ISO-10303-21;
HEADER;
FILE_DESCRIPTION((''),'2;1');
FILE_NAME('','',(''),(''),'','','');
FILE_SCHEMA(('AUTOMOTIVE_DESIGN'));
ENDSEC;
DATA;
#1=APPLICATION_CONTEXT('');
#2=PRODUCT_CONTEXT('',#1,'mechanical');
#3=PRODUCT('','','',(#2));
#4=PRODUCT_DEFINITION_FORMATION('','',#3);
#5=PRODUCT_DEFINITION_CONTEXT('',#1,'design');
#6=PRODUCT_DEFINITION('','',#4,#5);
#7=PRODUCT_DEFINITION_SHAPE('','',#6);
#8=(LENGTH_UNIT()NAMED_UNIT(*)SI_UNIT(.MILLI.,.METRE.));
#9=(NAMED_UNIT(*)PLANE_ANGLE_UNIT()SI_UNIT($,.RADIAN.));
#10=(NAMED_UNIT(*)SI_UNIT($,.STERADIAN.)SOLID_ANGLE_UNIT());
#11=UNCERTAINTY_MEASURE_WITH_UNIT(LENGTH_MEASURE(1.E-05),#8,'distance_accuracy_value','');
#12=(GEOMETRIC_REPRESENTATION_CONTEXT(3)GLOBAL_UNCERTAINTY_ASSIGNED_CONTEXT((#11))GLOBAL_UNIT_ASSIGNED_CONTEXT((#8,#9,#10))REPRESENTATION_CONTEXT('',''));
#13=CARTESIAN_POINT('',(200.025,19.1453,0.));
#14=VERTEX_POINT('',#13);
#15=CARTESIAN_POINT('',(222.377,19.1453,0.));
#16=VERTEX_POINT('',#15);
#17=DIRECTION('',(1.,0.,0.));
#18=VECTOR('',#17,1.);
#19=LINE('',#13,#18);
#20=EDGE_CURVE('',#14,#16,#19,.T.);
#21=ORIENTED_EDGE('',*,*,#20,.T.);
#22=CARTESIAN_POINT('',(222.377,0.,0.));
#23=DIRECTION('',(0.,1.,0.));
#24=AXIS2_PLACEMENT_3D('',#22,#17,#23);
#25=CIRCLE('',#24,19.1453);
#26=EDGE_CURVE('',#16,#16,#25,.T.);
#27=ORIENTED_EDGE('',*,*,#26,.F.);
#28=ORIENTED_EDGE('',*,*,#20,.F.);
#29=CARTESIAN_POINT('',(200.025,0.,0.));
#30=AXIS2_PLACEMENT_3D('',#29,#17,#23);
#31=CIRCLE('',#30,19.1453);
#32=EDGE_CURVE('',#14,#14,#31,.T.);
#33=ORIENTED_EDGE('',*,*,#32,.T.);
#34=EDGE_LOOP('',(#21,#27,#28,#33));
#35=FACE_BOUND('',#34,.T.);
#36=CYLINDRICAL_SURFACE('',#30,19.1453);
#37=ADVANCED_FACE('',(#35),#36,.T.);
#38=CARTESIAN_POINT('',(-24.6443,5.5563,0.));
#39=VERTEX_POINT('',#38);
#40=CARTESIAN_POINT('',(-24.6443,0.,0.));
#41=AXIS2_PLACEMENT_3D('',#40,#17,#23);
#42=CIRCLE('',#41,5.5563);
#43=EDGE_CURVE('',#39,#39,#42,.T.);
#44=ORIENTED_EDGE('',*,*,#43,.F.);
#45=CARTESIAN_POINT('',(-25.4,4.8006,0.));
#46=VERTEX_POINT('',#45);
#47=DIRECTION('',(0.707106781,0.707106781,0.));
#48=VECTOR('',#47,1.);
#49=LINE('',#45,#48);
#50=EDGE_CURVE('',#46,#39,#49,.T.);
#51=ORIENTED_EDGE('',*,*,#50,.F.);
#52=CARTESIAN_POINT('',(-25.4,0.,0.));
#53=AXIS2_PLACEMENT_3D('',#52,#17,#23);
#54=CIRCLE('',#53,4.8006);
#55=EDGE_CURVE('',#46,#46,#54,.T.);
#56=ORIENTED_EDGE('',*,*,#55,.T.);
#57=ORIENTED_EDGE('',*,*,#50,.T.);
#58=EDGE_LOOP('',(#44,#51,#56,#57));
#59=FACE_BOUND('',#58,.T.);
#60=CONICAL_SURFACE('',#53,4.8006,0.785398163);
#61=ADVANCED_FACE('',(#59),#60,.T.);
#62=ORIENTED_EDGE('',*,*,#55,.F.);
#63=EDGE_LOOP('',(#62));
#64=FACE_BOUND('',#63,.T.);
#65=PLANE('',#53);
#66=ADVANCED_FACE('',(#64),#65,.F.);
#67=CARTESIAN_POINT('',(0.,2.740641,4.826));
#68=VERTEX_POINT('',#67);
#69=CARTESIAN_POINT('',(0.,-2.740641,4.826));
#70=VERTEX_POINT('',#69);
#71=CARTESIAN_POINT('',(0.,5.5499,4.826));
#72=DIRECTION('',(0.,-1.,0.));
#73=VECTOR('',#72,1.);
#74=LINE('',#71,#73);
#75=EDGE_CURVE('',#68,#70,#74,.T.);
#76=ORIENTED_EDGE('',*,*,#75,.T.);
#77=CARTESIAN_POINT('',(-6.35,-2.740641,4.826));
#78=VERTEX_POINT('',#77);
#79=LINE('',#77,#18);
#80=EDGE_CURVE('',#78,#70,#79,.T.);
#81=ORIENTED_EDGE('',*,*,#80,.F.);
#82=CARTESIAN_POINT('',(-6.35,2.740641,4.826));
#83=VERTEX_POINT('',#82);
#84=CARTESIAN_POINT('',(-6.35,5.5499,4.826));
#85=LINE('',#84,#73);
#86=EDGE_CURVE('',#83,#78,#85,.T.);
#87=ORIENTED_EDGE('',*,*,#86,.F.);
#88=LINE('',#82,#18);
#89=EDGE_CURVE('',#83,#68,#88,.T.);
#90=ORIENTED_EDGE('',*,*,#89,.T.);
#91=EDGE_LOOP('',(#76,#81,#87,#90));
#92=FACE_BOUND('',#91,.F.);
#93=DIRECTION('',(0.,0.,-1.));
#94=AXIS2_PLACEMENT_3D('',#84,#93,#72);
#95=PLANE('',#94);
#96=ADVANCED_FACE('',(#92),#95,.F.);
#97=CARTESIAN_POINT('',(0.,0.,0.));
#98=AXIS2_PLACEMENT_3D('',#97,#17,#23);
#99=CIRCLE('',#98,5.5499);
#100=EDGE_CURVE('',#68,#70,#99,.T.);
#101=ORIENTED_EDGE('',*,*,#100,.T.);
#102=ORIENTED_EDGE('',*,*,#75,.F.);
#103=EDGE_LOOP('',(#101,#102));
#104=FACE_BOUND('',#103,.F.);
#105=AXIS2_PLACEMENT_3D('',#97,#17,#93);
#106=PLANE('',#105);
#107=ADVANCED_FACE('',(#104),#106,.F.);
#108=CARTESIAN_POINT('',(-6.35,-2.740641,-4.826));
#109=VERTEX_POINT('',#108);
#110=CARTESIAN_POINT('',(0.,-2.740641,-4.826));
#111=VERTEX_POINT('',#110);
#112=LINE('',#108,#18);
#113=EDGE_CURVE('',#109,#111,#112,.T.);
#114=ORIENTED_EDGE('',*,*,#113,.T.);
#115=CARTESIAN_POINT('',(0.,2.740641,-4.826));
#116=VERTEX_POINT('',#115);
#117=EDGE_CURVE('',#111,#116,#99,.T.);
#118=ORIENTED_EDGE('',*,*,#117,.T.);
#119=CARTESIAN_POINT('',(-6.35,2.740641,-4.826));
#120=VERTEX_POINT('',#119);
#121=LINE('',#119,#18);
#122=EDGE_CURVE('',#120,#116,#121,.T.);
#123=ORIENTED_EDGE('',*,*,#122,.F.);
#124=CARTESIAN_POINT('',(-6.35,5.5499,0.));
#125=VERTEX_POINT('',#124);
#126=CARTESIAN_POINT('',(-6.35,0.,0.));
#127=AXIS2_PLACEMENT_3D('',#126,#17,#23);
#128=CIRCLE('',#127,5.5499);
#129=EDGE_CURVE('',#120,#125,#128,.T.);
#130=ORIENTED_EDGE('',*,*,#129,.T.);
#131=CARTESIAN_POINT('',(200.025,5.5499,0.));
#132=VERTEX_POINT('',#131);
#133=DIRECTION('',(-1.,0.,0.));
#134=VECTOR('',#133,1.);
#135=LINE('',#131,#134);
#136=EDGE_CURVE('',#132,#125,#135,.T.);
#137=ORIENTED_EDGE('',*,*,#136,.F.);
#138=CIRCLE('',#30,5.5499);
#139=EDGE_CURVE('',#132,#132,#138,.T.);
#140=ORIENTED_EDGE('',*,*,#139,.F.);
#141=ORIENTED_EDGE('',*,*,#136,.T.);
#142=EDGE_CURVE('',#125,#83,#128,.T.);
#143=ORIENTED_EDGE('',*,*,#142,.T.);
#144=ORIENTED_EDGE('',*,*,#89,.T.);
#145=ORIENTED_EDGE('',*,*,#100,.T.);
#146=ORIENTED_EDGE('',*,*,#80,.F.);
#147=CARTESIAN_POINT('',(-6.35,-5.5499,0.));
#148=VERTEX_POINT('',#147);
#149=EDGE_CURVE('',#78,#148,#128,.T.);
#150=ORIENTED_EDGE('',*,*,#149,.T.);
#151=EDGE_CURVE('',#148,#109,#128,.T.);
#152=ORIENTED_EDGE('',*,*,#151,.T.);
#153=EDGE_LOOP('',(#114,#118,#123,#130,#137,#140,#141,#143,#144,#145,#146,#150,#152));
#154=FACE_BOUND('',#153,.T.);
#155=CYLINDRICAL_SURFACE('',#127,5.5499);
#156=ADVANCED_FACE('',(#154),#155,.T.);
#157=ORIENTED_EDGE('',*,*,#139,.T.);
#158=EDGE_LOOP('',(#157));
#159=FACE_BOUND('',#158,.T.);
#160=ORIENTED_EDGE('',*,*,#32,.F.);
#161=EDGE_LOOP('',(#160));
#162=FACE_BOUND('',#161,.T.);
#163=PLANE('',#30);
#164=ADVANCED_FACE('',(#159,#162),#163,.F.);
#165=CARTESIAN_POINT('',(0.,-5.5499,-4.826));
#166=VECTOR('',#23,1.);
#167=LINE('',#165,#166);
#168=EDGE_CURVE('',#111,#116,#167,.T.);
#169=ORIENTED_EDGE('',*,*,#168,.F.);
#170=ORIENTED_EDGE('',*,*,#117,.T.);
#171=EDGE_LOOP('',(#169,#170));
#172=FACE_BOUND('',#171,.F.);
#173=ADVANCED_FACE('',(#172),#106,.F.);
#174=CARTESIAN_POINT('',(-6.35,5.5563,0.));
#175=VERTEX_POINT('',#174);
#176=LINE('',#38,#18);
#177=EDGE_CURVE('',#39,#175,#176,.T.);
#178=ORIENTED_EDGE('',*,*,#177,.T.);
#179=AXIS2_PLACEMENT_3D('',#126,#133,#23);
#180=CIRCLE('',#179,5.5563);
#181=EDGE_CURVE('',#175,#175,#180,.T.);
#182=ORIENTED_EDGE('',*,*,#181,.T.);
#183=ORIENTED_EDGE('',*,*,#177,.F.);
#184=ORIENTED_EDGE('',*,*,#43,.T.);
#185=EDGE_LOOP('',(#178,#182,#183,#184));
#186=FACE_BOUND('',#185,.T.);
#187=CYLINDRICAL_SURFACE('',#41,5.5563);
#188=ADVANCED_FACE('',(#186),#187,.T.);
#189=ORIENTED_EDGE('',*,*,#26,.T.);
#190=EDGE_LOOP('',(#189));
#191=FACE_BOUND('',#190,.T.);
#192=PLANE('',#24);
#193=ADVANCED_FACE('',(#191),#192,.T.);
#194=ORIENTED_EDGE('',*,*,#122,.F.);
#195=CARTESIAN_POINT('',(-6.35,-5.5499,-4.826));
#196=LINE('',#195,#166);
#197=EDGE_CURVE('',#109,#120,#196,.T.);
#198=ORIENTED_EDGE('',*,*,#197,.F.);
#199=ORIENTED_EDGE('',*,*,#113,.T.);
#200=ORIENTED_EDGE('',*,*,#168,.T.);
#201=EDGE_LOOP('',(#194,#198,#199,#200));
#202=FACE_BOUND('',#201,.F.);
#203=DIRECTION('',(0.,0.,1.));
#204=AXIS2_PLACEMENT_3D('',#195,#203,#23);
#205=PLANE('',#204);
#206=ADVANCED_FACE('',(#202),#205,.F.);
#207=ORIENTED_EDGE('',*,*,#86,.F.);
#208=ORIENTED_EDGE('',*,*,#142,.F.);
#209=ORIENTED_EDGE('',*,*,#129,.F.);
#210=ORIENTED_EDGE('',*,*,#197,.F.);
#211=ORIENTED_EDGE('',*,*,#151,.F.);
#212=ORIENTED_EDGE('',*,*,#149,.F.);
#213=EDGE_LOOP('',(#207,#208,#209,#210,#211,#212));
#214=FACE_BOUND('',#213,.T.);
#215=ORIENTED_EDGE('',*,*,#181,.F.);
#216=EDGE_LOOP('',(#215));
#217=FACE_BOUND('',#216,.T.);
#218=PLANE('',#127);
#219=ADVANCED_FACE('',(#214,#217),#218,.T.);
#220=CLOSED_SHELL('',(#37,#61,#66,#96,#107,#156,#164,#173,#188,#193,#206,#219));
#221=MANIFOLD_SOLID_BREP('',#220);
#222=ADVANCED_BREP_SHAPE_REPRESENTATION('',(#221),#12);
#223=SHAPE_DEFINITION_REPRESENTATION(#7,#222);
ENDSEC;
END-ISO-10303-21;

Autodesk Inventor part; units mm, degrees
sketch "Sketch_1" plane through (0, 0, 0) normal (0, 0, 1) x (1, 0, 0)
  line L0 (222.377, 0) -> (-6.35, 0)
  line L1 (-6.35, 0) -> (-6.35, 5.5499)
  line L2 (-6.35, 5.5499) -> (200.025, 5.5499)
  line L3 (200.025, 5.5499) -> (200.025, 19.1453)
  line L4 (200.025, 19.1453) -> (222.377, 19.1453)
  line L5 (222.377, 19.1453) -> (222.377, 0)
  line L6 (222.377, 0) -> (-6.35, 0)
revolve "Revolution1" add sketch "Sketch_1" angle 360 about axis through (222.377, 0, 0) along (1, 0, 0)
sketch "Sketch_3" plane through (0, 0, 0) normal (0, 0, 1) x (1, 0, 0)
  line L0 (-6.35, 0) -> (-25.4, 0)
  line L1 (-25.4, 0) -> (-25.4, 4.8006)
  line L2 (-25.4, 4.8006) -> (-24.6443, 5.5563)
  line L3 (-24.6443, 5.5563) -> (-6.35, 5.5563)
  line L4 (-6.35, 5.5563) -> (-6.35, 0)
  line L5 (-6.35, 0) -> (-25.4, 0)
revolve "Revolution2" add sketch "Sketch_3" angle 360 about axis through (-6.35, 0, 0) along (1, 0, 0)
thread "Thread1" size "7/16-20 UNF" class "2A" standard "ANSI Unified Screw Threads" full length
sketch "Sketch_10" plane through (-6.35, 0, 0) normal (1, 0, 0) x (0, 0, -1)
  line L0 (-11.0998, -11.0998) -> (11.0998, -11.0998)
  line L1 (11.0998, -11.0998) -> (11.0998, 11.0998)
  line L2 (11.0998, 11.0998) -> (-11.0998, 11.0998)
  line L3 (-11.0998, 11.0998) -> (-11.0998, -11.0998)
  line L4 (-4.826, -5.5499) -> (4.826, -5.5499)
  line L5 (4.826, -5.5499) -> (4.826, 5.5499)
  line L6 (4.826, 5.5499) -> (-4.826, 5.5499)
  line L7 (-4.826, 5.5499) -> (-4.826, -5.5499)
extrude "Extrusion1" cut sketch "Sketch_10" along normal blind 6.35
ref_plane "dia1_XY" through (-6.35, 5.5499, 0) normal (1, 0, 0) x (0, 0, -1)
ref_plane "dia1_YZ" through (-6.35, 5.5499, 0) normal (0, 0, -1) x (0, 1, 0)
ref_plane "dia1_ZX" through (-6.35, 5.5499, 0) normal (0, 1, 0) x (1, 0, 0)
ref_plane "dia12_XY" through (0, 0, 19.7675) normal (1, 0, 0) x (0, 0, -1)
ref_plane "dia12_YZ" through (0, 0, 19.7675) normal (0, 0, -1) x (0, 1, 0)
ref_plane "dia12_ZX" through (0, 0, 19.7675) normal (0, 1, 0) x (1, 0, 0)
ref_plane "dia2_XY" through (-6.35, -5.5499, 0) normal (1, 0, 0) x (0, 0, -1)
ref_plane "dia2_YZ" through (-6.35, -5.5499, 0) normal (0, 0, -1) x (0, 1, 0)
ref_plane "dia2_ZX" through (-6.35, -5.5499, 0) normal (0, 1, 0) x (1, 0, 0)
ref_plane "dia22_XY" through (0, 0, -19.7675) normal (1, 0, 0) x (0, 0, -1)
ref_plane "dia22_YZ" through (0, 0, -19.7675) normal (0, 0, -1) x (0, 1, 0)
ref_plane "dia22_ZX" through (0, 0, -19.7675) normal (0, 1, 0) x (1, 0, 0)
ref_plane "rl1_XY" through (-25.4, 0, 0) normal (1, 0, 0) x (0, 0, -1)
ref_plane "rl1_YZ" through (-25.4, 0, 0) normal (0, 0, -1) x (0, 1, 0)
ref_plane "rl1_ZX" through (-25.4, 0, 0) normal (0, 1, 0) x (1, 0, 0)
ref_plane "rl2_XY" through (-6.35, 0, 0) normal (1, 0, 0) x (0, 0, -1)
ref_plane "rl2_YZ" through (-6.35, 0, 0) normal (0, 0, -1) x (0, 1, 0)
ref_plane "rl2_ZX" through (-6.35, 0, 0) normal (0, 1, 0) x (1, 0, 0)
ref_plane "rod_cp_XY" through (0, 0, 0) normal (1, 0, 0) x (0, 0, -1)
ref_plane "rod_cp_YZ" through (0, 0, 0) normal (0, 0, -1) x (0, 1, 0)
ref_plane "rod_cp_ZX" through (0, 0, 0) normal (0, 1, 0) x (1, 0, 0)
ref_plane "thd1_XY" through (-25.4, 5.5563, 0) normal (1, 0, 0) x (0, 0, -1)
ref_plane "thd1_YZ" through (-25.4, 5.5563, 0) normal (0, 0, -1) x (0, 1, 0)
ref_plane "thd1_ZX" through (-25.4, 5.5563, 0) normal (0, 1, 0) x (1, 0, 0)
ref_plane "thd2_XY" through (-25.4, -5.5563, 0) normal (1, 0, 0) x (0, 0, -1)
ref_plane "thd2_YZ" through (-25.4, -5.5563, 0) normal (0, 0, -1) x (0, 1, 0)
ref_plane "thd2_ZX" through (-25.4, -5.5563, 0) normal (0, 1, 0) x (1, 0, 0)
ref_plane "to_rod_clevis_XY" through (-30.988, 0, 0) normal (1, 0, 0) x (0, 0, -1)
ref_plane "to_rod_clevis_YZ" through (-30.988, 0, 0) normal (0, 0, -1) x (0, 1, 0)
ref_plane "to_rod_clevis_ZX" through (-30.988, 0, 0) normal (0, 1, 0) x (1, 0, 0)
ref_plane "wf1_XY" through (-6.35, 0, 0) normal (1, 0, 0) x (0, 0, -1)
ref_plane "wf1_YZ" through (-6.35, 0, 0) normal (0, 0, -1) x (0, 1, 0)
ref_plane "wf1_ZX" through (-6.35, 0, 0) normal (0, 1, 0) x (1, 0, 0)
ref_plane "wf2_XY" through (0, 0, 0) normal (1, 0, 0) x (0, 0, -1)
ref_plane "wf2_YZ" through (0, 0, 0) normal (0, 0, -1) x (0, 1, 0)
ref_plane "wf2_ZX" through (0, 0, 0) normal (0, 1, 0) x (1, 0, 0)
ref_plane "wfw1_XY" through (-6.35, 0, -4.826) normal (0, 1, 0) x (1, 0, 0)
ref_plane "wfw1_YZ" through (-6.35, 0, -4.826) normal (1, 0, 0) x (0, 0, -1)
ref_plane "wfw1_ZX" through (-6.35, 0, -4.826) normal (0, 0, -1) x (0, 1, 0)
ref_plane "wfw2_XY" through (-6.35, 0, 4.826) normal (0, 1, 0) x (1, 0, 0)
ref_plane "wfw2_YZ" through (-6.35, 0, 4.826) normal (1, 0, 0) x (0, 0, -1)
ref_plane "wfw2_ZX" through (-6.35, 0, 4.826) normal (0, 0, -1) x (0, 1, 0)
properties part number "C-176-DP0000_rod"
